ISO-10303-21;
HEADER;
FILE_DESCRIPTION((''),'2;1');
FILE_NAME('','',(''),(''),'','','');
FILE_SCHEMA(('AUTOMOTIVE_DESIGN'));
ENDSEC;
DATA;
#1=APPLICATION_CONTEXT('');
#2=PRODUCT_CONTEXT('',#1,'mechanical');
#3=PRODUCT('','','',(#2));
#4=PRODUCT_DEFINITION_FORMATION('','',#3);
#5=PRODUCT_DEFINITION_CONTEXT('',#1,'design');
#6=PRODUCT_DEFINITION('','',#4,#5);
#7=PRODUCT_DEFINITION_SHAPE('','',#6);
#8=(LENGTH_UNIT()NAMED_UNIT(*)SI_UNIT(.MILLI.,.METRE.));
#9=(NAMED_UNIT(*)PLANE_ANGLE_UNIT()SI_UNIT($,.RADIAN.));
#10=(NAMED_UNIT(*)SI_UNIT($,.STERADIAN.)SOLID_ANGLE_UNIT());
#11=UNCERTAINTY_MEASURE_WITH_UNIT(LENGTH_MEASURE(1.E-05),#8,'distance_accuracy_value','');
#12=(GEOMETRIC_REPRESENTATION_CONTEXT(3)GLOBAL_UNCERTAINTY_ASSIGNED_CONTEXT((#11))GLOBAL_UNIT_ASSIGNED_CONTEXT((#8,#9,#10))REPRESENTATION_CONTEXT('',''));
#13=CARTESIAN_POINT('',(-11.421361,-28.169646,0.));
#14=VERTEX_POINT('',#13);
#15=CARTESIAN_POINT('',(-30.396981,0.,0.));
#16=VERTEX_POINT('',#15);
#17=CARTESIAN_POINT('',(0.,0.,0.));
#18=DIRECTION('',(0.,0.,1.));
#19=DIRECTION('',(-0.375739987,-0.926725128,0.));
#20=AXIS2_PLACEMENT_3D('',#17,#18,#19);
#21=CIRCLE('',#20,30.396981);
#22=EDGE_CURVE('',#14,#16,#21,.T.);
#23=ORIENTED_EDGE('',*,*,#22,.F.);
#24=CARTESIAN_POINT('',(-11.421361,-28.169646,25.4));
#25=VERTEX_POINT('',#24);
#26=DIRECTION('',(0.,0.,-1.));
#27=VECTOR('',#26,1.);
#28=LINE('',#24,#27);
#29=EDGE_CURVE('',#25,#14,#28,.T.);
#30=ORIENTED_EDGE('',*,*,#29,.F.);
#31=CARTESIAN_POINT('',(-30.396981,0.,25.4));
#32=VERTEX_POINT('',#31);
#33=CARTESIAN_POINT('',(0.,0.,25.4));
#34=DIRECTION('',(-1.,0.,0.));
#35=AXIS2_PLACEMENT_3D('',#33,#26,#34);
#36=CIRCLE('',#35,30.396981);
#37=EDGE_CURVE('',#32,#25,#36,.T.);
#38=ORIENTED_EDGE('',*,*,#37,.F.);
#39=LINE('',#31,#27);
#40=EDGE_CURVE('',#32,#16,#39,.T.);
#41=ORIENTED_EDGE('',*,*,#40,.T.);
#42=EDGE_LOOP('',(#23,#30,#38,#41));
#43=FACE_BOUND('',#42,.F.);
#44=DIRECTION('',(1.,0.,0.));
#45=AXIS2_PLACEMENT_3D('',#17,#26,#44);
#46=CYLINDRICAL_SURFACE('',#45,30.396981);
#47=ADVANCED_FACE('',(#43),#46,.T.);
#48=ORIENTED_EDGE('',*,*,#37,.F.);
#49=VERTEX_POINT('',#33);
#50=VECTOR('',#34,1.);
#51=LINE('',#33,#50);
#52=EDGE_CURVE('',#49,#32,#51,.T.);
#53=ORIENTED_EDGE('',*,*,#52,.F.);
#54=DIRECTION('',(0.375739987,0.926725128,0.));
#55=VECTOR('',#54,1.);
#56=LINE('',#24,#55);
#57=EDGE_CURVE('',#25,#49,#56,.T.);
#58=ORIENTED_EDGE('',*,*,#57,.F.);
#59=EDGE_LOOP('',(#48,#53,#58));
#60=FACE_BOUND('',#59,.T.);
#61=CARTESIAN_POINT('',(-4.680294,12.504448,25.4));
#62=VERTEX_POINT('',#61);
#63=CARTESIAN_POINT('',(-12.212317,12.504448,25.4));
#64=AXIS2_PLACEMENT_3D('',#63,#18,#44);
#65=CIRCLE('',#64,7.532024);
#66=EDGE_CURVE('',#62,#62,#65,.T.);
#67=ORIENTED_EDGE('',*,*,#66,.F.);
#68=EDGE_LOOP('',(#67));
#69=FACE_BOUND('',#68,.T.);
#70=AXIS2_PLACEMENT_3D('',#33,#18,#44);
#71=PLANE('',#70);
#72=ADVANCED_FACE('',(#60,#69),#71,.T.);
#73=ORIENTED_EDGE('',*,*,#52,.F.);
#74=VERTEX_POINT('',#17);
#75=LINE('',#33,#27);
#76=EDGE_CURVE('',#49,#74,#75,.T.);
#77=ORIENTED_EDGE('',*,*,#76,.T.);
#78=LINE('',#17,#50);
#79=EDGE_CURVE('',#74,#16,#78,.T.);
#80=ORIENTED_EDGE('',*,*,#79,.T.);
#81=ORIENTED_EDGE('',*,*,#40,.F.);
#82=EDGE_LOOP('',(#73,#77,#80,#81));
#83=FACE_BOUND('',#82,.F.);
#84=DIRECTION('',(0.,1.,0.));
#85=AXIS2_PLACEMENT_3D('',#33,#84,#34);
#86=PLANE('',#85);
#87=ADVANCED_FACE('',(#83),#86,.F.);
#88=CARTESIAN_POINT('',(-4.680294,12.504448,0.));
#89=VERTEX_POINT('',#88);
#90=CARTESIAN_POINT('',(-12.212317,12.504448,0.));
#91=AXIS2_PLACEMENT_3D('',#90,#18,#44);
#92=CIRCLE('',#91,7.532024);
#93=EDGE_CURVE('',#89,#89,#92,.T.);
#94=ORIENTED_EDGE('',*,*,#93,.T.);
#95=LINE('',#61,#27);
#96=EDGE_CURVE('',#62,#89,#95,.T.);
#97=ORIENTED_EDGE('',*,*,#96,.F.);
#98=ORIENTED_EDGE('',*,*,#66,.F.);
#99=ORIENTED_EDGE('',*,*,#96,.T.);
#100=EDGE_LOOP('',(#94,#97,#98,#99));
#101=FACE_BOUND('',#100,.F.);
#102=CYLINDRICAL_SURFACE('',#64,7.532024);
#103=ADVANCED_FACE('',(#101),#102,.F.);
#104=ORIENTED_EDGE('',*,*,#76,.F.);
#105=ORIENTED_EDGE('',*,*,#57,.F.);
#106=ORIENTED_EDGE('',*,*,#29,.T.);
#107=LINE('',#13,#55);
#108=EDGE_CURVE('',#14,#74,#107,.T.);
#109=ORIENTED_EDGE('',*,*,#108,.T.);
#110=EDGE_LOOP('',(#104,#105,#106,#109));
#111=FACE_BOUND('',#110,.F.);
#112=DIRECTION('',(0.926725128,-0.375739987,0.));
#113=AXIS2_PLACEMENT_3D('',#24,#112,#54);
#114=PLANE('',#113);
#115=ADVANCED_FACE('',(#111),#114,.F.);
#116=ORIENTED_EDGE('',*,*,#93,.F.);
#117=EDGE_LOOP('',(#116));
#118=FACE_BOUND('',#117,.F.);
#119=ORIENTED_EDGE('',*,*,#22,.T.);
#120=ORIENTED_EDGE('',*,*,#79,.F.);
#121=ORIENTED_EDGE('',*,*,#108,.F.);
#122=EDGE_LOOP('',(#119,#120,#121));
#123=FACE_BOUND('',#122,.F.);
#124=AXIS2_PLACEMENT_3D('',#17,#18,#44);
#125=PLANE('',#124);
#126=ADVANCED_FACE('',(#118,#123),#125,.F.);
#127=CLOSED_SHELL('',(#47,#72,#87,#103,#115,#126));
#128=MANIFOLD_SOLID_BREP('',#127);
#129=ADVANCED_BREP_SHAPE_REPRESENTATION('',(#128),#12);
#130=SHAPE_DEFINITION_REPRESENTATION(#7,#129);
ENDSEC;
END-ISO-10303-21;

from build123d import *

# Parameters (mm, degrees)
F0_R     = 30.3969812701
F1_DEPTH = 25.4
F3_DEPTH = 25.4
F4_R     = 7.532023706
F5_DEPTH = 25.4


# Not quite as in the source:
# - a feature names something its author has since deleted; it is built from what else it names


with BuildPart() as f1:
    # F0 (on Top) → F1 (new body)
    with BuildSketch(Plane.XY):
        Circle(F0_R)
    extrude(amount=F1_DEPTH)

    # F2 (on face) → F3 (cut)
    with BuildSketch(Plane.XY.offset(25.4)):
        Polygon((0, 0), (-30.3969812701, 0), (-30.3969812701, -28.1696463504), (-11.4213613388, -28.1696463504), align=None)
    extrude(amount=-F3_DEPTH, mode=Mode.SUBTRACT)

    # F4 (on face) → F5 (cut)
    with BuildSketch(Plane.XY.offset(25.4)):
        with Locations((-12.2123174369, 12.5044481829)):
            Circle(F4_R)
    extrude(amount=-F5_DEPTH, mode=Mode.SUBTRACT)


solid = f1.part
